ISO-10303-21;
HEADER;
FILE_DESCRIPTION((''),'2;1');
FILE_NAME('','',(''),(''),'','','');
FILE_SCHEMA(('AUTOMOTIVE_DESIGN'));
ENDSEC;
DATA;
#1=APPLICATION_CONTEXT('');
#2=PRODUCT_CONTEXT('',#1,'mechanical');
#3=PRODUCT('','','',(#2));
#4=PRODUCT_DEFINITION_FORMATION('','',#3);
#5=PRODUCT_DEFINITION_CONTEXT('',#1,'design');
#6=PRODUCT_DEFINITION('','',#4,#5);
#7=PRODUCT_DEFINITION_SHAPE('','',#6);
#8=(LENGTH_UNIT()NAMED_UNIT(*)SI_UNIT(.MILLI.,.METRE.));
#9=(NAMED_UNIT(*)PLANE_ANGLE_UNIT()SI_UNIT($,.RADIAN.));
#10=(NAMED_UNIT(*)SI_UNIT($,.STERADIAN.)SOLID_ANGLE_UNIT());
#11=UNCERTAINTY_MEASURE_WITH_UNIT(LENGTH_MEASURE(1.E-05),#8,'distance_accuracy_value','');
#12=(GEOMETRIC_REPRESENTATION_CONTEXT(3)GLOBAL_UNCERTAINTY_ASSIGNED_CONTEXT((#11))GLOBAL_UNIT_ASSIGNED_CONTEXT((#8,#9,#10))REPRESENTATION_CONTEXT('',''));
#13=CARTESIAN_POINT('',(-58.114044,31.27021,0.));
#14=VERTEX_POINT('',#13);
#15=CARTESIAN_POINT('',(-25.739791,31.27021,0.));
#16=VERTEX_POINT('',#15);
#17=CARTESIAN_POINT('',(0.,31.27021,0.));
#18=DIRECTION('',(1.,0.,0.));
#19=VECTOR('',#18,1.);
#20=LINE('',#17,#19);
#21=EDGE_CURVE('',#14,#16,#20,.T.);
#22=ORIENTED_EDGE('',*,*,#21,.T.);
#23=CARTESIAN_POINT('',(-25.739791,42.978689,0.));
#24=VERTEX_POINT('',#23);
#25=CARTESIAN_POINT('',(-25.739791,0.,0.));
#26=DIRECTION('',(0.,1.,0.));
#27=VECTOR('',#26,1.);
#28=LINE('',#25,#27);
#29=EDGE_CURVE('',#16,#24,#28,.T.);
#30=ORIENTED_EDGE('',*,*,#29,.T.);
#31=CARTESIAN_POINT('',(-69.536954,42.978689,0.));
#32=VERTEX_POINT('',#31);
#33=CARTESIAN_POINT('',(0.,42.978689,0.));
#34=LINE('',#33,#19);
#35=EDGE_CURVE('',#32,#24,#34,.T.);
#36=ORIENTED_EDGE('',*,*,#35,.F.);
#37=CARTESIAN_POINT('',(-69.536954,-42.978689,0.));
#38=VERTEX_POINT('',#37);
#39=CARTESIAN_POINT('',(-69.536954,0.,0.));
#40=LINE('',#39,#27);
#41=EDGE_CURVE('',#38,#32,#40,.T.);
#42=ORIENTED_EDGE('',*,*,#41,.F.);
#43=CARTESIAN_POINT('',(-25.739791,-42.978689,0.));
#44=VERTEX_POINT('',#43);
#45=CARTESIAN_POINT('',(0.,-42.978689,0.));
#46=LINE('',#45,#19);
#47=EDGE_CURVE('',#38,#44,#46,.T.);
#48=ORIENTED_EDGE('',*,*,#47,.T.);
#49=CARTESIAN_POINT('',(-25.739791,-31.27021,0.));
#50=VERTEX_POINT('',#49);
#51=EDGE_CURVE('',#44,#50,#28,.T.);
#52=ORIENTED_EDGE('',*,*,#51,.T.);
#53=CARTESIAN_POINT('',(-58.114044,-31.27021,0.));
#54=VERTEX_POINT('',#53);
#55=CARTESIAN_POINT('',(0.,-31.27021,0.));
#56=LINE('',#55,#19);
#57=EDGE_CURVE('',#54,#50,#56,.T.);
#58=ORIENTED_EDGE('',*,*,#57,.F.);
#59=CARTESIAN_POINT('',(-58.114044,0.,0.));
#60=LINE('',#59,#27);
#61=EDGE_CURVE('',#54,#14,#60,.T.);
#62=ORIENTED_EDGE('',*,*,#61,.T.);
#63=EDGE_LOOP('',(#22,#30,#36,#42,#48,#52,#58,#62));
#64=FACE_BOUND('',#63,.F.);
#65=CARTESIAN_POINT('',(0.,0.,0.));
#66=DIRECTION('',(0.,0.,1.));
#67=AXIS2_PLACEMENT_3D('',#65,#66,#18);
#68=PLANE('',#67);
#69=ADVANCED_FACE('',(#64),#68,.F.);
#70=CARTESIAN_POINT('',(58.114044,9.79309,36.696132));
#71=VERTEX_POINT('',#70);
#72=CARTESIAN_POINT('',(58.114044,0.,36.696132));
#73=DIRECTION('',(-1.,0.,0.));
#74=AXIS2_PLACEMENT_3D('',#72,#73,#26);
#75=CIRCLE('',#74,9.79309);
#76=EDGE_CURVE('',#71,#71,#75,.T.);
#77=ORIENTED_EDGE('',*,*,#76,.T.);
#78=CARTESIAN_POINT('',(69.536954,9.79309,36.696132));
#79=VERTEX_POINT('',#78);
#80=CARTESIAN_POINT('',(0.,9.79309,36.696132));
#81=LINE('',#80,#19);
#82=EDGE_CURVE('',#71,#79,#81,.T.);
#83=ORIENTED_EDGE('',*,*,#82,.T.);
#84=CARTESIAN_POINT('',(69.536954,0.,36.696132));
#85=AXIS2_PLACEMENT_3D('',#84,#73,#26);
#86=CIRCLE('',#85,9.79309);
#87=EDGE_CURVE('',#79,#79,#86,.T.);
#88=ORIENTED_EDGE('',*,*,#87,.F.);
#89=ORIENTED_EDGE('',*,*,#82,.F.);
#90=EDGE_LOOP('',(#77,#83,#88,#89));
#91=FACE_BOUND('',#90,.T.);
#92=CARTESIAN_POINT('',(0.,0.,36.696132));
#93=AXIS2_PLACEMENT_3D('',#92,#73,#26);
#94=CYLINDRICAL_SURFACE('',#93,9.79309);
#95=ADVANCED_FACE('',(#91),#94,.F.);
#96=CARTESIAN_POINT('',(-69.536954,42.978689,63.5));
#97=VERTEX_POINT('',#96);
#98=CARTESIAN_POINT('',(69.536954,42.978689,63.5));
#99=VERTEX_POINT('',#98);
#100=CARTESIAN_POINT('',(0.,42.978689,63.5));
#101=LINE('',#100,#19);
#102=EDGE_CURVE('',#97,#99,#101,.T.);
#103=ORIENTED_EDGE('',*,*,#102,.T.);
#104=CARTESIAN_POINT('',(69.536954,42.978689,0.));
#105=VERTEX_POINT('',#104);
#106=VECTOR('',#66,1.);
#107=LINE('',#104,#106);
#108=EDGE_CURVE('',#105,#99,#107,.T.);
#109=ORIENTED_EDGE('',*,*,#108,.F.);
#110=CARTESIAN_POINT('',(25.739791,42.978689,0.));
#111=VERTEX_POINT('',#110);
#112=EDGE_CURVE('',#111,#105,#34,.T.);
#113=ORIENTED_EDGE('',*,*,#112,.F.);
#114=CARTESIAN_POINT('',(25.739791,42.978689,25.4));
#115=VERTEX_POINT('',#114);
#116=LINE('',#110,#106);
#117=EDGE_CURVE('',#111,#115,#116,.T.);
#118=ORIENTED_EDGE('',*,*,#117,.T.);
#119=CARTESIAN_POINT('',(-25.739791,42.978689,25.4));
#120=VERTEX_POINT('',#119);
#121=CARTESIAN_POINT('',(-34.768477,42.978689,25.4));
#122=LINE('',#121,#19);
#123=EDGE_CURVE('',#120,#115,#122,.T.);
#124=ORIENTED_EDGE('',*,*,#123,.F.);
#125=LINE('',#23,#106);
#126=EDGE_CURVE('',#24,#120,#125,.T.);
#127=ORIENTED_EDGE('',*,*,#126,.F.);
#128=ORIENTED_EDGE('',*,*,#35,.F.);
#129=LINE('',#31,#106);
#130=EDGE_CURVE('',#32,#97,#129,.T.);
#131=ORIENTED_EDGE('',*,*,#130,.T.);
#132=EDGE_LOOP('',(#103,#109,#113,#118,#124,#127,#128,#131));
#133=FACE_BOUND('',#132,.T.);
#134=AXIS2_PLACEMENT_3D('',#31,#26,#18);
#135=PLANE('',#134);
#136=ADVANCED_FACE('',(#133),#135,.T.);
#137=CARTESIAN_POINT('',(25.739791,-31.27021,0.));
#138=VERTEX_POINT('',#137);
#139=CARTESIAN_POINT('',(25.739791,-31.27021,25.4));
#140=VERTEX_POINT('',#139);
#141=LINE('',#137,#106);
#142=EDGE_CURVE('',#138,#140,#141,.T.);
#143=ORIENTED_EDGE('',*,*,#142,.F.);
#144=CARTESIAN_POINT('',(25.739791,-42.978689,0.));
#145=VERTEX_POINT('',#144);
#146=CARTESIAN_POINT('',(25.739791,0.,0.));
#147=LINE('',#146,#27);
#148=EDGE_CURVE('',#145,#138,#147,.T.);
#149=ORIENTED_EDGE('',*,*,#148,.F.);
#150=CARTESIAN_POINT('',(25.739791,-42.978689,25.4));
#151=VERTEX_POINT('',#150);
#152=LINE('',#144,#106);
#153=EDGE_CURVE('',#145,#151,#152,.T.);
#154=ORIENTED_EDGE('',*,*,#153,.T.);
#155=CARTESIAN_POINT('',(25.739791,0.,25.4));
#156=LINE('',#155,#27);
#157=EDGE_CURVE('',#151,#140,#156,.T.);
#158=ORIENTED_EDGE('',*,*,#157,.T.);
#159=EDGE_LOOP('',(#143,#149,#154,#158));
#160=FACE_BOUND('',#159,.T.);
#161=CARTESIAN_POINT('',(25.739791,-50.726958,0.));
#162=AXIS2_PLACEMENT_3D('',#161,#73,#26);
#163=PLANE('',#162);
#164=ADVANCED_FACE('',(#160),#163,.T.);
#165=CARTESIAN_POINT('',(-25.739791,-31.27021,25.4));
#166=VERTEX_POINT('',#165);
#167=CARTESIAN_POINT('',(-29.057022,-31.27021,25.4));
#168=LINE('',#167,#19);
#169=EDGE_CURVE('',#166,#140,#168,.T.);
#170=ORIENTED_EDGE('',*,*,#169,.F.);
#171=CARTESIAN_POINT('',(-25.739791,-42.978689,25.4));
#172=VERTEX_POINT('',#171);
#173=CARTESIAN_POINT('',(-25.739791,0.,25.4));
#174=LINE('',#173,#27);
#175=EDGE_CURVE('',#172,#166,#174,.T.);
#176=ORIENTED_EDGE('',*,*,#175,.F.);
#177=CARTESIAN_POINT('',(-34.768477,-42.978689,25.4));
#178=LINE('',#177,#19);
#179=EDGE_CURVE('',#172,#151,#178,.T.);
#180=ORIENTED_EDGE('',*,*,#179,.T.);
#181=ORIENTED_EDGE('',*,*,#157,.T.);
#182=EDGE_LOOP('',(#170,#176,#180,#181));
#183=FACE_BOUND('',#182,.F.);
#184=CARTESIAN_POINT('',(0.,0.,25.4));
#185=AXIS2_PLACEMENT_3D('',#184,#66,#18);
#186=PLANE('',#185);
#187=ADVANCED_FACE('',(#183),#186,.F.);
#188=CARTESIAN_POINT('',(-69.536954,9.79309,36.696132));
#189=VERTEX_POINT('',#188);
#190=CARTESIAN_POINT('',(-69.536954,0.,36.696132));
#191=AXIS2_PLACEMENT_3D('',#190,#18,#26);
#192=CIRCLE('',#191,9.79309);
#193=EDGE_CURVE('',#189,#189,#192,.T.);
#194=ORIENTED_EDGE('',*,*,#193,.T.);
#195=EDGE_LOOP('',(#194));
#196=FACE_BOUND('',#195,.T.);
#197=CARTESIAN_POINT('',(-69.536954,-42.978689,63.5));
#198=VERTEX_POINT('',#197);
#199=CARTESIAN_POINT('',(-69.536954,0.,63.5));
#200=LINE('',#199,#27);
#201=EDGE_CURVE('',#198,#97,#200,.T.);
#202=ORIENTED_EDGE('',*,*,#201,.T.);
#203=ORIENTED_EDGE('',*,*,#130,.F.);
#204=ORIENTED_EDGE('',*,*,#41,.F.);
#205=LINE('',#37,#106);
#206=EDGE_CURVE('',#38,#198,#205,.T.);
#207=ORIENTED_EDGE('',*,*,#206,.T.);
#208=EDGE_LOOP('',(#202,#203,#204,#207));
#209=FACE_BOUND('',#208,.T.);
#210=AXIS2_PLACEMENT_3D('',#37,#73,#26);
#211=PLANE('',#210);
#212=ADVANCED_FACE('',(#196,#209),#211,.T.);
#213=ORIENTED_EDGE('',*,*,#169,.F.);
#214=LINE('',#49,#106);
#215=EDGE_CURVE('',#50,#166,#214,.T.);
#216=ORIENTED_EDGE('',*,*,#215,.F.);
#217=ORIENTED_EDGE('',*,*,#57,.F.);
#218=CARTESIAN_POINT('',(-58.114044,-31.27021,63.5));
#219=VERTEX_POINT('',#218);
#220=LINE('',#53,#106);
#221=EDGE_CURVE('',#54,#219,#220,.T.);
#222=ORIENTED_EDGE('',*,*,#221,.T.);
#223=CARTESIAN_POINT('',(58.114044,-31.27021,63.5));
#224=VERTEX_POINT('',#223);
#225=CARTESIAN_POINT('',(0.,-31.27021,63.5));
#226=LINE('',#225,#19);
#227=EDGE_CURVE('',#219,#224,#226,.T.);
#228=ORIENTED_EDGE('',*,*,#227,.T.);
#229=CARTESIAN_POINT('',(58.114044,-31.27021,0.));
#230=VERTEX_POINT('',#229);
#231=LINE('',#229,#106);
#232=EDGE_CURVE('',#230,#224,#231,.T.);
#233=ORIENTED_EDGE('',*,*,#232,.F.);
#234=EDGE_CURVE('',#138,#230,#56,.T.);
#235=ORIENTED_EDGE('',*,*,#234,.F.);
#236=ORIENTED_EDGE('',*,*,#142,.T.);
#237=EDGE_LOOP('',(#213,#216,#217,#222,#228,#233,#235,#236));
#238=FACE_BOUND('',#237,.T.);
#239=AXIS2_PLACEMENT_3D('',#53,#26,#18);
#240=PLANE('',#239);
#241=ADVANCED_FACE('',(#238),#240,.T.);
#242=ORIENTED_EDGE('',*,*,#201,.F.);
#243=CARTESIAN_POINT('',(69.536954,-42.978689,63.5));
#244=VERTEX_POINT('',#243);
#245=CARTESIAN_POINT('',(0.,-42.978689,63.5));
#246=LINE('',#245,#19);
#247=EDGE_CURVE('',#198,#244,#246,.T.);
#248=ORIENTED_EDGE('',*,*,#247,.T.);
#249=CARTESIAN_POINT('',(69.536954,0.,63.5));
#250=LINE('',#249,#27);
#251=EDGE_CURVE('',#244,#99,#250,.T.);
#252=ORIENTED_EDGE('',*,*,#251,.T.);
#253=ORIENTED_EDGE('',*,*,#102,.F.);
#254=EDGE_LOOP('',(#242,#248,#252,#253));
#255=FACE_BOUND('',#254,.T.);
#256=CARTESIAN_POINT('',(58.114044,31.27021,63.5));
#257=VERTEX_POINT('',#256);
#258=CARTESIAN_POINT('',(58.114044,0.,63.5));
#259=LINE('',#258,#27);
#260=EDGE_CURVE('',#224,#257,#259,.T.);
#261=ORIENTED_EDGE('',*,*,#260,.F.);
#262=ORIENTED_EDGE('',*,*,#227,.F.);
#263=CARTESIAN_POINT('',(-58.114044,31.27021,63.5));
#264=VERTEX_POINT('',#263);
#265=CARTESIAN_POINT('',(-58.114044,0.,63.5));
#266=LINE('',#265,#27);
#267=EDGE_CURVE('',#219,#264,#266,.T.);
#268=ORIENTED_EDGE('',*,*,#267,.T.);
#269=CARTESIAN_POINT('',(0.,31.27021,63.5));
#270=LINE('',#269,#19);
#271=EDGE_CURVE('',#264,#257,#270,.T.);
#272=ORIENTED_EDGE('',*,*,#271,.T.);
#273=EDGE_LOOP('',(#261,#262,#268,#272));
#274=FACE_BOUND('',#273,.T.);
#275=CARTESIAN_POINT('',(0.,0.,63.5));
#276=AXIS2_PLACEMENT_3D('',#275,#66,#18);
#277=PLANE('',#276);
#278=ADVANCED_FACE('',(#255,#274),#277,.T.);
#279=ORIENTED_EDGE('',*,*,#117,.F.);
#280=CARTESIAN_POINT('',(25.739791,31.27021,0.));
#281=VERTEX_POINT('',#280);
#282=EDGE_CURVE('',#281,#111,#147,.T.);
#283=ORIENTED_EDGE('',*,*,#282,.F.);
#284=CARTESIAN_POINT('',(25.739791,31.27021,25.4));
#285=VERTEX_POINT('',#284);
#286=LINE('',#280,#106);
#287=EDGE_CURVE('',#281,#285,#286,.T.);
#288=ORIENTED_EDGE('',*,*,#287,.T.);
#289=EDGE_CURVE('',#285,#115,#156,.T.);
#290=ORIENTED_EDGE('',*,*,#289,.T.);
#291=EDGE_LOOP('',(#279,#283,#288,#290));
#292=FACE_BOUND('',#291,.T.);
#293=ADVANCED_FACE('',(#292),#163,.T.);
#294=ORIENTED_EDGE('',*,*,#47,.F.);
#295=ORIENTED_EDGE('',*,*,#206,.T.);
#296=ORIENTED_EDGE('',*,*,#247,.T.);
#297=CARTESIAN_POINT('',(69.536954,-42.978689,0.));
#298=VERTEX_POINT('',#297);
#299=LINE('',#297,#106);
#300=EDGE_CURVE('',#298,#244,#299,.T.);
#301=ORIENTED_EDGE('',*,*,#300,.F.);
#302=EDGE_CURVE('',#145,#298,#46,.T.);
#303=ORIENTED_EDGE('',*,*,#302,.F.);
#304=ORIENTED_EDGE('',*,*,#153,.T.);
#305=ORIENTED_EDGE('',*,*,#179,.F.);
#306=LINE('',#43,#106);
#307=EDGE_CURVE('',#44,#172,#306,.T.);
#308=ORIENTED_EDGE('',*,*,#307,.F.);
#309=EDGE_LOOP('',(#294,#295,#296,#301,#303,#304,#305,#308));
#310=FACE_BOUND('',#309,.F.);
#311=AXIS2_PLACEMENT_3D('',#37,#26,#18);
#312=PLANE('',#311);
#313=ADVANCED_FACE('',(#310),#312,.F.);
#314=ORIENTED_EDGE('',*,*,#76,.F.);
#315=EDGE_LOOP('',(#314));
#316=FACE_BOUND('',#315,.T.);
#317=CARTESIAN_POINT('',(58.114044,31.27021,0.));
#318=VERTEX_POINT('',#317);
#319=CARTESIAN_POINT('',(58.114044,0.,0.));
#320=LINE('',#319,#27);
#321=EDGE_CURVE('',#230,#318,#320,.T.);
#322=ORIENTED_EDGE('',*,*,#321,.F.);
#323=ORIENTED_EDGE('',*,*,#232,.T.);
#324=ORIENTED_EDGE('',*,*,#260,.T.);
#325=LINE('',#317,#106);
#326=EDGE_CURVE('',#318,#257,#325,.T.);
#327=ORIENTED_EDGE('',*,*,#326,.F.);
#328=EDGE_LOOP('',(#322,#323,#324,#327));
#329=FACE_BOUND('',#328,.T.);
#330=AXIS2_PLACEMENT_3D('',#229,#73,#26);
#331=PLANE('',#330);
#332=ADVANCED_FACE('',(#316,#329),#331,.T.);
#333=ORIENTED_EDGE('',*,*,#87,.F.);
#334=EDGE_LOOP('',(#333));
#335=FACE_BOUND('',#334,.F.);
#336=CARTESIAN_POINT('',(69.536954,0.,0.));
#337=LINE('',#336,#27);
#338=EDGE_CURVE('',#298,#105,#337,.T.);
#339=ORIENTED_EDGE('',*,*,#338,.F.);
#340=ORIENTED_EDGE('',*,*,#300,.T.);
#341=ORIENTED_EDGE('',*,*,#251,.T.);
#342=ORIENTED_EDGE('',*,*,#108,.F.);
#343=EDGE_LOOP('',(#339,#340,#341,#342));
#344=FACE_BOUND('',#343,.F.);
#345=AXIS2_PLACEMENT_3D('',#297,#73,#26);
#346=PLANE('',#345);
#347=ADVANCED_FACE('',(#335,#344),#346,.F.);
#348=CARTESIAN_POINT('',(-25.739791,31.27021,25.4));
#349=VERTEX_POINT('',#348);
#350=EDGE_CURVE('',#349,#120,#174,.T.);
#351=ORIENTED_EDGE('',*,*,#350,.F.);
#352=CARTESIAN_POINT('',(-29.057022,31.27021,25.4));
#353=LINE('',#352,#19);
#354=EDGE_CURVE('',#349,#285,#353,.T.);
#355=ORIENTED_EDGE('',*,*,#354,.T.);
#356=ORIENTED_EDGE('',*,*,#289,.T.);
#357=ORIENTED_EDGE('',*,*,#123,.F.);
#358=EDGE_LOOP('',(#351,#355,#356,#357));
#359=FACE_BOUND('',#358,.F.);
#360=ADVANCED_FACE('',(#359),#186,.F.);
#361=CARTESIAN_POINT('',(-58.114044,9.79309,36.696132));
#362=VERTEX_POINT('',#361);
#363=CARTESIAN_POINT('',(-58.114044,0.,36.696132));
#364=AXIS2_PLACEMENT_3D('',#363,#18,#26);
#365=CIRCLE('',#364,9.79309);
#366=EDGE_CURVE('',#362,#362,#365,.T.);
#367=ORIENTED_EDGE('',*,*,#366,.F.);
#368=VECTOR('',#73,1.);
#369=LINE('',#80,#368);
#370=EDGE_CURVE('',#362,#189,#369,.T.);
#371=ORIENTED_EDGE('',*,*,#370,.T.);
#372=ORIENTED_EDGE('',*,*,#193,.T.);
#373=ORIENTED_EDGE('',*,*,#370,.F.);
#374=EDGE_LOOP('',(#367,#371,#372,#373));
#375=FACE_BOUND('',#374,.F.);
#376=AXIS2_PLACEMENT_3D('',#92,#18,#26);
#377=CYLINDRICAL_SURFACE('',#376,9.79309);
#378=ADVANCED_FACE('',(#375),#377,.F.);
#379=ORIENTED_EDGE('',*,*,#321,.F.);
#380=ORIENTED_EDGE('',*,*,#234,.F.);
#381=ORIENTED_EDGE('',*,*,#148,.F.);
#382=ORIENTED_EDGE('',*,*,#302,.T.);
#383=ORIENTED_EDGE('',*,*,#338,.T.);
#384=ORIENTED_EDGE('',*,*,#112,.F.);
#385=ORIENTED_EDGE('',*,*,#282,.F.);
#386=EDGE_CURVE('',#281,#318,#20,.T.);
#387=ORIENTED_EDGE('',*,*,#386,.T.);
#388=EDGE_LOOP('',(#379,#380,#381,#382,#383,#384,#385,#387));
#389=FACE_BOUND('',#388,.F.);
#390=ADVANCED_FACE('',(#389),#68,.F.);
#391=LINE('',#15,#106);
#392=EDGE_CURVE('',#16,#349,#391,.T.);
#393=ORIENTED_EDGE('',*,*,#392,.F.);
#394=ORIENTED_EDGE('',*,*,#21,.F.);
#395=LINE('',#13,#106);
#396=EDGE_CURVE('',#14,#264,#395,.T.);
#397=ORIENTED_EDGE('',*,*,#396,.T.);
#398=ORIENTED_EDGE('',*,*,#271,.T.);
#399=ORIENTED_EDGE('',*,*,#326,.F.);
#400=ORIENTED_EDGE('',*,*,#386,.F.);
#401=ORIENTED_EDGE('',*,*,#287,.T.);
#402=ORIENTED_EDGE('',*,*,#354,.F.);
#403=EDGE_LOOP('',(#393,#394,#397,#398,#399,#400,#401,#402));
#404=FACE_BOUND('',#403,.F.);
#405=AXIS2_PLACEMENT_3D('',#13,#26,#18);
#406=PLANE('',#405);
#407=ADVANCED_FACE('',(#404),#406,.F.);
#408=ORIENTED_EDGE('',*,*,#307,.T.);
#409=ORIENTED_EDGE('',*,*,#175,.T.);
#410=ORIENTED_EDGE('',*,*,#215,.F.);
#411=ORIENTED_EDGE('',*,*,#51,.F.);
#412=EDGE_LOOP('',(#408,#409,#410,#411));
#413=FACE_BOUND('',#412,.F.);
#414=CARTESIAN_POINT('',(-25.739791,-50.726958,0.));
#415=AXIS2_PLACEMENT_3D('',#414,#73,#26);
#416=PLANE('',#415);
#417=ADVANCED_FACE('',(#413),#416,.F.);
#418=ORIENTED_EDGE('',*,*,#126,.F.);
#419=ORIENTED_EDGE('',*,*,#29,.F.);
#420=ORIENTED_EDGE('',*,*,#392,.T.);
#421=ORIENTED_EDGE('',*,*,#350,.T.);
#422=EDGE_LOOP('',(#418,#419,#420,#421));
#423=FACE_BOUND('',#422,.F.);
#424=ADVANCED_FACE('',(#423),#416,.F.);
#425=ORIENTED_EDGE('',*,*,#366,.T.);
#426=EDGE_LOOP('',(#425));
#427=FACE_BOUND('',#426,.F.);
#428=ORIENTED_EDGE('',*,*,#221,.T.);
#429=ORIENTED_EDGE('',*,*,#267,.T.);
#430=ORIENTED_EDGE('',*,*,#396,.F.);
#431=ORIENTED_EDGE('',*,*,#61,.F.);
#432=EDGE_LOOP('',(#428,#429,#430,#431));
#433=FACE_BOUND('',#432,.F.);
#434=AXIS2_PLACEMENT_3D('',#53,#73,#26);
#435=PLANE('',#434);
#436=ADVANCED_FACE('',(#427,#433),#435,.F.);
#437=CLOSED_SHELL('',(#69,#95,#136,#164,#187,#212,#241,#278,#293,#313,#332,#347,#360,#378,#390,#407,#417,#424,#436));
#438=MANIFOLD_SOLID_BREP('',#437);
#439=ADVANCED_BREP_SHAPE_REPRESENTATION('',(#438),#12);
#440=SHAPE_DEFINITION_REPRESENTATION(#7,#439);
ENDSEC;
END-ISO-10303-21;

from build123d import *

# Parameters (mm, degrees)
F0_W     = 139.073908329
F0_H     = 85.957378149
F0_W_2   = 116.2280887365
F0_H_2   = 62.5404193997
F1_DEPTH = 63.5
F2_W     = 51.4795817435
F2_H     = 101.4539152384
F3_DEPTH = 25.4
F4_DEPTH = 25.4
F5_R     = 9.7930895965
F6_DEPTH = 69.5379541645


# Not quite as in the source:
# - a pattern or mirror of a feature is missing from the dataset's text; its kind, count and spacing are read off the source's solid


with BuildPart() as f1:
    # F0 (on Top) → F1 (new body)
    with BuildSketch(Plane.XY):
        Rectangle(F0_W, F0_H)
        Rectangle(F0_W_2, F0_H_2, mode=Mode.SUBTRACT)
    extrude(amount=F1_DEPTH)

    # F2 (on Top) → F3 (join)
    with BuildSketch(Plane.XY):
        Rectangle(F2_W, F2_H)
    extrude(amount=F3_DEPTH)

    # F2 (on Top) → F4 (cut)
    with BuildSketch(Plane.XY):
        Rectangle(F2_W, F2_H)
    extrude(amount=F4_DEPTH, mode=Mode.SUBTRACT)

    # F5 (on Right) → F6 (cut, through all)
    with BuildSketch(Plane.YZ):
        with Locations((0, 36.6961322725)):
            Circle(F5_R)
    f6 = extrude(amount=-F6_DEPTH, mode=Mode.SUBTRACT)

    # F6_copies: F6 across plane
    add(f6.mirror(Plane(origin=(0, 0, 0), x_dir=(0, 0, 1), z_dir=(1, 0, 0))), mode=Mode.SUBTRACT)


solid = f1.part
